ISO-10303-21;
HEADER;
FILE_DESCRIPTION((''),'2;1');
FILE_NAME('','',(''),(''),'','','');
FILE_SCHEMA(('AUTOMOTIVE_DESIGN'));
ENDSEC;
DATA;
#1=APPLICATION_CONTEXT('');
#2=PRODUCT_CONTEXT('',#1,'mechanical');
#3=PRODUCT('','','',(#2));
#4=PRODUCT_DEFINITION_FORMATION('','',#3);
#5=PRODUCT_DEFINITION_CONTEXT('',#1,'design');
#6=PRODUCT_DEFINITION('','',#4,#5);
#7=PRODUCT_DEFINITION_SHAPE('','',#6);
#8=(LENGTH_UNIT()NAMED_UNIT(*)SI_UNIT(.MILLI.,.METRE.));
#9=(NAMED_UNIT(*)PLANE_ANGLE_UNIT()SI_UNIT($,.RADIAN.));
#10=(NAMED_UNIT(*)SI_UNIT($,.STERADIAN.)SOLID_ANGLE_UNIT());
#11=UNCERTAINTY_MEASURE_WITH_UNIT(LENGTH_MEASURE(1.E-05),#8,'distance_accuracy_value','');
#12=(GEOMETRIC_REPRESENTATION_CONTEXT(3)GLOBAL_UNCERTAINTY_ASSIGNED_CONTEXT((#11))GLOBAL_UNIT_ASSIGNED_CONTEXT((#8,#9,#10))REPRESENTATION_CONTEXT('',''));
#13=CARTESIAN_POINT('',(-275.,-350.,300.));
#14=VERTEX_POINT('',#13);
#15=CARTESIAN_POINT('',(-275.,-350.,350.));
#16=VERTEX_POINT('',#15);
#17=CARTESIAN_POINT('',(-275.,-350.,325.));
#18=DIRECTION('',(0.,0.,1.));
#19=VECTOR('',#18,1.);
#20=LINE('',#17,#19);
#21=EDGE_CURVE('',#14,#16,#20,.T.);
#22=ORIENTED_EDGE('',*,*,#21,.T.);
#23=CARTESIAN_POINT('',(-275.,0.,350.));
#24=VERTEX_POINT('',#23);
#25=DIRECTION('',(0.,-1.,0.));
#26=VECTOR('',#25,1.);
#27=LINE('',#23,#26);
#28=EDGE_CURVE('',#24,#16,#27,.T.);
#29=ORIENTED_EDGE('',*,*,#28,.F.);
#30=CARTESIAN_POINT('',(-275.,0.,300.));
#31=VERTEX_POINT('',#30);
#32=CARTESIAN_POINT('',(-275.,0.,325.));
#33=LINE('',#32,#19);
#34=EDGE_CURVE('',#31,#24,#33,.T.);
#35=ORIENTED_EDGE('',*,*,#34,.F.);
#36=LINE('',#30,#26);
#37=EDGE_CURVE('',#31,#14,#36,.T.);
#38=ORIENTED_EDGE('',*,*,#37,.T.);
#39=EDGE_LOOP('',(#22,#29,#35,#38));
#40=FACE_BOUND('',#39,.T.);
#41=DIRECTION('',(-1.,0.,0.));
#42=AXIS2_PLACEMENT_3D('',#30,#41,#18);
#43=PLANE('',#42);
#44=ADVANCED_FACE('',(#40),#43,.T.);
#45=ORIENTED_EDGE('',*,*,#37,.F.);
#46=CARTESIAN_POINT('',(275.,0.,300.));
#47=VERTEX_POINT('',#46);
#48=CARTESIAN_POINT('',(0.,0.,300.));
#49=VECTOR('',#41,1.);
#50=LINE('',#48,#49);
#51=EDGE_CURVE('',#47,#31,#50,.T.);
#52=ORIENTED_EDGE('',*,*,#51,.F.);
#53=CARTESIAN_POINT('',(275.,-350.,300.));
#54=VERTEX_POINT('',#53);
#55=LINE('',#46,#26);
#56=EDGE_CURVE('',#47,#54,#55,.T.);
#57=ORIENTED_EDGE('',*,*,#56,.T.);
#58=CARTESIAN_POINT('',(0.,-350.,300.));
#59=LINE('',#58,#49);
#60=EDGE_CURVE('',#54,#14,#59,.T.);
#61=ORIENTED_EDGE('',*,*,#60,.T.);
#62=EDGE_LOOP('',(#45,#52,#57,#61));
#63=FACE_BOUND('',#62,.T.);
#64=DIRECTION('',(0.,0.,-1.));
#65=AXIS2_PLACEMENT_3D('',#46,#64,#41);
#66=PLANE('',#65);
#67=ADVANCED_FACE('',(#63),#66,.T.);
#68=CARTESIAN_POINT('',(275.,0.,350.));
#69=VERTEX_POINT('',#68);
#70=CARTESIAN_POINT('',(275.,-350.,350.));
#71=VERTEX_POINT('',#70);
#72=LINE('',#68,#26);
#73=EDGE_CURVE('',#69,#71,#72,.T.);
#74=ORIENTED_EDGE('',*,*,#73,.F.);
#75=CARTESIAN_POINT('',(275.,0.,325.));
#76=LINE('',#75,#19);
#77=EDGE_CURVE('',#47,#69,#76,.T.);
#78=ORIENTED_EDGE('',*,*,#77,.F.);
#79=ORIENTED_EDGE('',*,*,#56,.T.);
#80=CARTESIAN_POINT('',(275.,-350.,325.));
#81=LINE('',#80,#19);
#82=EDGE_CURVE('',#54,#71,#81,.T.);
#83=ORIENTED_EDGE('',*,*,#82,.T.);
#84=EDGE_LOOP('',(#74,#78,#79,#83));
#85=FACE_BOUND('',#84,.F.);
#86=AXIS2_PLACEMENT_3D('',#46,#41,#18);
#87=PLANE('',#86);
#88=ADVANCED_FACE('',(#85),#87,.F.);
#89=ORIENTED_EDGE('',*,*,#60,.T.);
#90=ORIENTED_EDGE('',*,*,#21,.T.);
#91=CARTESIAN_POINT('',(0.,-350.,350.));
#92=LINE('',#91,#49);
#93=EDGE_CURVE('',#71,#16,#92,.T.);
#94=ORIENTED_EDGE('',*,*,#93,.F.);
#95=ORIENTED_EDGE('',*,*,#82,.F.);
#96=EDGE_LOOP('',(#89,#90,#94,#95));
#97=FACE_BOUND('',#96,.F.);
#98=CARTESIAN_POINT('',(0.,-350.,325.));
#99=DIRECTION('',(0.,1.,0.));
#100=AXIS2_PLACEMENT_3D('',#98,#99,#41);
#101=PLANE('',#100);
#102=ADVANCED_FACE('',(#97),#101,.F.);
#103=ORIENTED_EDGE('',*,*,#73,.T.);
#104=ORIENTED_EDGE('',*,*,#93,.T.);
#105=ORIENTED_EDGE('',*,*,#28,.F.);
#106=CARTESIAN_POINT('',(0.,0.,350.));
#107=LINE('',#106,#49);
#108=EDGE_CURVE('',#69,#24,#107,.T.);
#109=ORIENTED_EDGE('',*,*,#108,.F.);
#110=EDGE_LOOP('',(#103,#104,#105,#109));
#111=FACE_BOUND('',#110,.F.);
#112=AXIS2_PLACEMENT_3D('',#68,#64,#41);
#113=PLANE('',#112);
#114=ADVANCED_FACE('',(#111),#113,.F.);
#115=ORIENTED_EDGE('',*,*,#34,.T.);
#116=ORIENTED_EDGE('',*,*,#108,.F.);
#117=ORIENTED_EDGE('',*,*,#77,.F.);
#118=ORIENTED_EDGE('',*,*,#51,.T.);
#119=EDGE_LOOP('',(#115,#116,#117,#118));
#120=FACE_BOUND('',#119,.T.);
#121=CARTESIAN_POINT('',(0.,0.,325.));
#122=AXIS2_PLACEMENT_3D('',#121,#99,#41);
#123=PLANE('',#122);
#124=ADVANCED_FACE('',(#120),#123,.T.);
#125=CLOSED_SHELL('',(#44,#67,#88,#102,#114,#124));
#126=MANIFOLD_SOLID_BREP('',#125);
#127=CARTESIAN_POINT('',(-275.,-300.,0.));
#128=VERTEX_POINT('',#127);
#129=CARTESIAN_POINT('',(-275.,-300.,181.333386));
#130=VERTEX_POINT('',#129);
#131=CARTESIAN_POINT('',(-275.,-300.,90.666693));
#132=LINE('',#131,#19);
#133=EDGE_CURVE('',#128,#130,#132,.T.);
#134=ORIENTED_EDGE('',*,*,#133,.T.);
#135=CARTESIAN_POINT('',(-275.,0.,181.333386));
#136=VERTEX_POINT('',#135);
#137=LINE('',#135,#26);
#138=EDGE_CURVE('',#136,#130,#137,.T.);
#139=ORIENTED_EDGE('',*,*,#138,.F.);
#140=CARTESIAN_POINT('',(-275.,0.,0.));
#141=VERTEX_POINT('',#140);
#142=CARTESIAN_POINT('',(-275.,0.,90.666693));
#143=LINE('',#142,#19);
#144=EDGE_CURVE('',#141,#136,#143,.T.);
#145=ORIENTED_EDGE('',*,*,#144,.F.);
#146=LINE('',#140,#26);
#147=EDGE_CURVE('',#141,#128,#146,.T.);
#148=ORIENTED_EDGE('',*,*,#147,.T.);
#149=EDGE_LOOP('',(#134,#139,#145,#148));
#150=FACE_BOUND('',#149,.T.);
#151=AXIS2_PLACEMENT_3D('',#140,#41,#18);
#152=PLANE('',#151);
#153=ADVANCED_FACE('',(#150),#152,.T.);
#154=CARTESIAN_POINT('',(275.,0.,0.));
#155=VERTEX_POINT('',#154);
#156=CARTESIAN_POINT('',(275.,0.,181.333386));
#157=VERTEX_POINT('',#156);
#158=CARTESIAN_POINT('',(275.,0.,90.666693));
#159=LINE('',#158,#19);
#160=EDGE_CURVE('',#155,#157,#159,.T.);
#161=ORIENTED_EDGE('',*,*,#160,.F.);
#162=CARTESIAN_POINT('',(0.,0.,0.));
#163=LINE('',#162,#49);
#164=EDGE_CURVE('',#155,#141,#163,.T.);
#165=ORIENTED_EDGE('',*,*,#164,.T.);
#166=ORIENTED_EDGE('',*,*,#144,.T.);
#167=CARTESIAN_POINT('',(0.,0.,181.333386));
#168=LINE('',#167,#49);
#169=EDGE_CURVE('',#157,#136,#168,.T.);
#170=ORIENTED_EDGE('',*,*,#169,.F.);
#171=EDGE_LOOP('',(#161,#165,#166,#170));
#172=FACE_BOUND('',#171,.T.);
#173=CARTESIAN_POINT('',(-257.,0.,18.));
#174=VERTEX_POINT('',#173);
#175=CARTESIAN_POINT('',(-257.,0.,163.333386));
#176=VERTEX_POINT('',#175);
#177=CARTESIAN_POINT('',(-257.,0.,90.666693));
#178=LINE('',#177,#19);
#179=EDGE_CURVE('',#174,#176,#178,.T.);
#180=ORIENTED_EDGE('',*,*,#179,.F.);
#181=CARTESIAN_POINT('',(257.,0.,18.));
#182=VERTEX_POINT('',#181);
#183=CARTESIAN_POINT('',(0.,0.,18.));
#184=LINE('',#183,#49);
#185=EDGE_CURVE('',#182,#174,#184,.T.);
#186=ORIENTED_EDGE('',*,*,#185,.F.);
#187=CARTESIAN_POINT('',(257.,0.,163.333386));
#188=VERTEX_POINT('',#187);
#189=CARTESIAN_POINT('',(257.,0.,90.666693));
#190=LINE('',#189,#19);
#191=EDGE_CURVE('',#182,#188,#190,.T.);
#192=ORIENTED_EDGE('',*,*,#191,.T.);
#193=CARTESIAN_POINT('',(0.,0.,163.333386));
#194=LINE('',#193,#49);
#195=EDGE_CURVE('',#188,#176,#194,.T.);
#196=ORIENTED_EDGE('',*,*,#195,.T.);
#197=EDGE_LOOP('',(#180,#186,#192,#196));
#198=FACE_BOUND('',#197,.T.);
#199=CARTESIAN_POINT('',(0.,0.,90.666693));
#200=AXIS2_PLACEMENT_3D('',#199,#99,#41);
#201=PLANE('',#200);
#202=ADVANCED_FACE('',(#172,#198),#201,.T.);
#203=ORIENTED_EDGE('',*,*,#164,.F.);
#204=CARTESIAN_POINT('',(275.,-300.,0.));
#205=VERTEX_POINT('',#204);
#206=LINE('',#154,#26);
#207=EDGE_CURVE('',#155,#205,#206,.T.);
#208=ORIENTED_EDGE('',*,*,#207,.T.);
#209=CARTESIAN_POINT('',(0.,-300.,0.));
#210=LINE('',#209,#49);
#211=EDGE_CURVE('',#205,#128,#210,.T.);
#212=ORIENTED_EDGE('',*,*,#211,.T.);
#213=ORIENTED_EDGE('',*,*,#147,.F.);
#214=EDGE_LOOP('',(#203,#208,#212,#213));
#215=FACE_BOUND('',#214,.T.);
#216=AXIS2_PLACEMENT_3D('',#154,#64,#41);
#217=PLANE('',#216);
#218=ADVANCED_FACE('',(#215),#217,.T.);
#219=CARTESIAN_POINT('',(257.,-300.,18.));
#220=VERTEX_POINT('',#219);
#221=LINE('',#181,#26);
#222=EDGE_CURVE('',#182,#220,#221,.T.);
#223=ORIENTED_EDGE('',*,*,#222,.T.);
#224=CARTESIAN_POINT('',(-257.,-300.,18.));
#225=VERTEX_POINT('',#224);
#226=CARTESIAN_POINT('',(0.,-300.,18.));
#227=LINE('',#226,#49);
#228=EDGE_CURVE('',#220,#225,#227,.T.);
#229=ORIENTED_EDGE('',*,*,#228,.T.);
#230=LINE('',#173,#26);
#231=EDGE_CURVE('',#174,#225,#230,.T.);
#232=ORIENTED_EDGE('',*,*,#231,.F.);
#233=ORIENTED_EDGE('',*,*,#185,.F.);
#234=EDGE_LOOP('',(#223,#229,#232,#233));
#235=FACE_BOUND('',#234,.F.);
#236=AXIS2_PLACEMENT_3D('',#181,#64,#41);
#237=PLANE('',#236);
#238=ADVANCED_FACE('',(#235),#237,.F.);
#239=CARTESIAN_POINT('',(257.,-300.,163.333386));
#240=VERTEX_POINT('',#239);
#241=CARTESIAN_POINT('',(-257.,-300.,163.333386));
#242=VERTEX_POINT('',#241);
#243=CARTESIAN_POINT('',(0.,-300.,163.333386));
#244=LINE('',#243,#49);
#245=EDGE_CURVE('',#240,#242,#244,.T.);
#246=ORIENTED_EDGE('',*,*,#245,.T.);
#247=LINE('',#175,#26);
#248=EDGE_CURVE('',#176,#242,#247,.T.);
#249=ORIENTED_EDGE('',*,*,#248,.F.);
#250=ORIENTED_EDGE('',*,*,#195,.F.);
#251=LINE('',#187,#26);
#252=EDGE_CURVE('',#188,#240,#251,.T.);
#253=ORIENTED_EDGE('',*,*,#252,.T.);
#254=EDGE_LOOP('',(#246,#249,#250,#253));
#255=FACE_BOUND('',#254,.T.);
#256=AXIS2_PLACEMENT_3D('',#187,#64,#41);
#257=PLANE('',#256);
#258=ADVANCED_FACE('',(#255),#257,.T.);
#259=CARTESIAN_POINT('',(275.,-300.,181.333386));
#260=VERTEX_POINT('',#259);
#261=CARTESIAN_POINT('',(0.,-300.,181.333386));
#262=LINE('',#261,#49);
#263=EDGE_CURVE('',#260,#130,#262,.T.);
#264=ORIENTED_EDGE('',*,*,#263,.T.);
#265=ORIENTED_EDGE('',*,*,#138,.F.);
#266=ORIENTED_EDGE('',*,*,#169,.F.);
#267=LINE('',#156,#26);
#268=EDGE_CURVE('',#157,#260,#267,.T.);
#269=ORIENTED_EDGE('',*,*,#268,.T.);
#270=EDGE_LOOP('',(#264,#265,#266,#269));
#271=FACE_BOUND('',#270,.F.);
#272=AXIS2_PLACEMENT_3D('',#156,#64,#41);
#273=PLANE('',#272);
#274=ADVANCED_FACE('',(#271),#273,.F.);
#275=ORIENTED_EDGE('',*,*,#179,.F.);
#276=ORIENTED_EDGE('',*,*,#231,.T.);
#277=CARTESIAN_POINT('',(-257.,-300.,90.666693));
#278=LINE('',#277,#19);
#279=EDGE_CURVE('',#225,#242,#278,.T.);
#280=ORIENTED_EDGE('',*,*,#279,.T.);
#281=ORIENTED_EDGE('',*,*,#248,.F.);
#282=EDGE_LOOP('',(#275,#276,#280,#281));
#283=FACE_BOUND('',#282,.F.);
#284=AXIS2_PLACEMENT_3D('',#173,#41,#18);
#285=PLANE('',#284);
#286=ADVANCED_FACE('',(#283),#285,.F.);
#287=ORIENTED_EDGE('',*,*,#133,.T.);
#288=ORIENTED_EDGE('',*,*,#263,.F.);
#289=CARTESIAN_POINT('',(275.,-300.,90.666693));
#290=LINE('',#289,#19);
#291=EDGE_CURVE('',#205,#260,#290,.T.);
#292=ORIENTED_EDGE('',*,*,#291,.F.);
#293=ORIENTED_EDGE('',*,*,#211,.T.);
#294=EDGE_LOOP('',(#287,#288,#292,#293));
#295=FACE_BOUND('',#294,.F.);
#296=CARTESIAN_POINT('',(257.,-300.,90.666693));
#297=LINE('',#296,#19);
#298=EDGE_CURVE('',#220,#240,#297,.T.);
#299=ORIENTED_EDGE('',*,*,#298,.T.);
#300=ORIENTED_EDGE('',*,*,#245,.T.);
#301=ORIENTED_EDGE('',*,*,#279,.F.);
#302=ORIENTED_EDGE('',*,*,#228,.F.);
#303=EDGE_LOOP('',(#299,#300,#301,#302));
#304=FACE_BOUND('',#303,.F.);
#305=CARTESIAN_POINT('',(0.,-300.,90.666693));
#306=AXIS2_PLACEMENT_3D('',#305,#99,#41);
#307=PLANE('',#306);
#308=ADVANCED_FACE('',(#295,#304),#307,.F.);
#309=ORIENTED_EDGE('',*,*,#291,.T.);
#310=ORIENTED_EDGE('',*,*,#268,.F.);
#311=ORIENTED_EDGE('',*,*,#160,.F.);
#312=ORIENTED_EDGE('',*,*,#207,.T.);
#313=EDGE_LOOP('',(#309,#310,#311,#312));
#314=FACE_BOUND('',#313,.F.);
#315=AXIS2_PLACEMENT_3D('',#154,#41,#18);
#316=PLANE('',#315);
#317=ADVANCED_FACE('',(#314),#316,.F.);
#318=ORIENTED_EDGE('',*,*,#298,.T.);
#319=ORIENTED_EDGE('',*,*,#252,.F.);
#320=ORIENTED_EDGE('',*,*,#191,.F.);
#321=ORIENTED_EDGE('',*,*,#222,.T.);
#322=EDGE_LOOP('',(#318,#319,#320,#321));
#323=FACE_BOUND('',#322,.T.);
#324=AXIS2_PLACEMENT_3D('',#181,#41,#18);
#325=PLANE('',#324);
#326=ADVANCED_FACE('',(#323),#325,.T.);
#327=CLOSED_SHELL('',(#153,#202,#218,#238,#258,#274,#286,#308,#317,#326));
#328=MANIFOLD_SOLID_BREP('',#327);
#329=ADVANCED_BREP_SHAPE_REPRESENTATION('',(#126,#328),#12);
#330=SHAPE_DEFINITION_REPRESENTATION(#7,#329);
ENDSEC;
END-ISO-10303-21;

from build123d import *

# Parameters (mm, degrees)
F4_W     = 550
F4_H     = 50
F5_DEPTH = 350
F6_W     = 550
F6_H     = 181.3333858525
F6_W_2   = 514
F6_H_2   = 145.3333858525
F7_DEPTH = 300


# Not quite as in the source:
# - the program builds the solid bodies; features that only make, move or delete a surface that nothing else refers to are left out


with BuildPart() as f5:
    # F4 (on face) → F5 (new body)
    with BuildSketch(Plane(origin=(0, 0, 0), x_dir=(-1, 0, 0), z_dir=(0, 1, 0))):
        with Locations((0, 325)):
            Rectangle(F4_W, F4_H)
    extrude(amount=-F5_DEPTH)


with BuildPart() as f7:
    # F6 (on face) → F7 (new body)
    with BuildSketch(Plane(origin=(0, 0, 0), x_dir=(-1, 0, 0), z_dir=(0, 1, 0))):
        with Locations((0, 90.6666929262)):
            Rectangle(F6_W, F6_H)
        with Locations((0, 90.6666929262)):
            Rectangle(F6_W_2, F6_H_2, mode=Mode.SUBTRACT)
    extrude(amount=-F7_DEPTH)


solid = Compound([f5.part, f7.part])
